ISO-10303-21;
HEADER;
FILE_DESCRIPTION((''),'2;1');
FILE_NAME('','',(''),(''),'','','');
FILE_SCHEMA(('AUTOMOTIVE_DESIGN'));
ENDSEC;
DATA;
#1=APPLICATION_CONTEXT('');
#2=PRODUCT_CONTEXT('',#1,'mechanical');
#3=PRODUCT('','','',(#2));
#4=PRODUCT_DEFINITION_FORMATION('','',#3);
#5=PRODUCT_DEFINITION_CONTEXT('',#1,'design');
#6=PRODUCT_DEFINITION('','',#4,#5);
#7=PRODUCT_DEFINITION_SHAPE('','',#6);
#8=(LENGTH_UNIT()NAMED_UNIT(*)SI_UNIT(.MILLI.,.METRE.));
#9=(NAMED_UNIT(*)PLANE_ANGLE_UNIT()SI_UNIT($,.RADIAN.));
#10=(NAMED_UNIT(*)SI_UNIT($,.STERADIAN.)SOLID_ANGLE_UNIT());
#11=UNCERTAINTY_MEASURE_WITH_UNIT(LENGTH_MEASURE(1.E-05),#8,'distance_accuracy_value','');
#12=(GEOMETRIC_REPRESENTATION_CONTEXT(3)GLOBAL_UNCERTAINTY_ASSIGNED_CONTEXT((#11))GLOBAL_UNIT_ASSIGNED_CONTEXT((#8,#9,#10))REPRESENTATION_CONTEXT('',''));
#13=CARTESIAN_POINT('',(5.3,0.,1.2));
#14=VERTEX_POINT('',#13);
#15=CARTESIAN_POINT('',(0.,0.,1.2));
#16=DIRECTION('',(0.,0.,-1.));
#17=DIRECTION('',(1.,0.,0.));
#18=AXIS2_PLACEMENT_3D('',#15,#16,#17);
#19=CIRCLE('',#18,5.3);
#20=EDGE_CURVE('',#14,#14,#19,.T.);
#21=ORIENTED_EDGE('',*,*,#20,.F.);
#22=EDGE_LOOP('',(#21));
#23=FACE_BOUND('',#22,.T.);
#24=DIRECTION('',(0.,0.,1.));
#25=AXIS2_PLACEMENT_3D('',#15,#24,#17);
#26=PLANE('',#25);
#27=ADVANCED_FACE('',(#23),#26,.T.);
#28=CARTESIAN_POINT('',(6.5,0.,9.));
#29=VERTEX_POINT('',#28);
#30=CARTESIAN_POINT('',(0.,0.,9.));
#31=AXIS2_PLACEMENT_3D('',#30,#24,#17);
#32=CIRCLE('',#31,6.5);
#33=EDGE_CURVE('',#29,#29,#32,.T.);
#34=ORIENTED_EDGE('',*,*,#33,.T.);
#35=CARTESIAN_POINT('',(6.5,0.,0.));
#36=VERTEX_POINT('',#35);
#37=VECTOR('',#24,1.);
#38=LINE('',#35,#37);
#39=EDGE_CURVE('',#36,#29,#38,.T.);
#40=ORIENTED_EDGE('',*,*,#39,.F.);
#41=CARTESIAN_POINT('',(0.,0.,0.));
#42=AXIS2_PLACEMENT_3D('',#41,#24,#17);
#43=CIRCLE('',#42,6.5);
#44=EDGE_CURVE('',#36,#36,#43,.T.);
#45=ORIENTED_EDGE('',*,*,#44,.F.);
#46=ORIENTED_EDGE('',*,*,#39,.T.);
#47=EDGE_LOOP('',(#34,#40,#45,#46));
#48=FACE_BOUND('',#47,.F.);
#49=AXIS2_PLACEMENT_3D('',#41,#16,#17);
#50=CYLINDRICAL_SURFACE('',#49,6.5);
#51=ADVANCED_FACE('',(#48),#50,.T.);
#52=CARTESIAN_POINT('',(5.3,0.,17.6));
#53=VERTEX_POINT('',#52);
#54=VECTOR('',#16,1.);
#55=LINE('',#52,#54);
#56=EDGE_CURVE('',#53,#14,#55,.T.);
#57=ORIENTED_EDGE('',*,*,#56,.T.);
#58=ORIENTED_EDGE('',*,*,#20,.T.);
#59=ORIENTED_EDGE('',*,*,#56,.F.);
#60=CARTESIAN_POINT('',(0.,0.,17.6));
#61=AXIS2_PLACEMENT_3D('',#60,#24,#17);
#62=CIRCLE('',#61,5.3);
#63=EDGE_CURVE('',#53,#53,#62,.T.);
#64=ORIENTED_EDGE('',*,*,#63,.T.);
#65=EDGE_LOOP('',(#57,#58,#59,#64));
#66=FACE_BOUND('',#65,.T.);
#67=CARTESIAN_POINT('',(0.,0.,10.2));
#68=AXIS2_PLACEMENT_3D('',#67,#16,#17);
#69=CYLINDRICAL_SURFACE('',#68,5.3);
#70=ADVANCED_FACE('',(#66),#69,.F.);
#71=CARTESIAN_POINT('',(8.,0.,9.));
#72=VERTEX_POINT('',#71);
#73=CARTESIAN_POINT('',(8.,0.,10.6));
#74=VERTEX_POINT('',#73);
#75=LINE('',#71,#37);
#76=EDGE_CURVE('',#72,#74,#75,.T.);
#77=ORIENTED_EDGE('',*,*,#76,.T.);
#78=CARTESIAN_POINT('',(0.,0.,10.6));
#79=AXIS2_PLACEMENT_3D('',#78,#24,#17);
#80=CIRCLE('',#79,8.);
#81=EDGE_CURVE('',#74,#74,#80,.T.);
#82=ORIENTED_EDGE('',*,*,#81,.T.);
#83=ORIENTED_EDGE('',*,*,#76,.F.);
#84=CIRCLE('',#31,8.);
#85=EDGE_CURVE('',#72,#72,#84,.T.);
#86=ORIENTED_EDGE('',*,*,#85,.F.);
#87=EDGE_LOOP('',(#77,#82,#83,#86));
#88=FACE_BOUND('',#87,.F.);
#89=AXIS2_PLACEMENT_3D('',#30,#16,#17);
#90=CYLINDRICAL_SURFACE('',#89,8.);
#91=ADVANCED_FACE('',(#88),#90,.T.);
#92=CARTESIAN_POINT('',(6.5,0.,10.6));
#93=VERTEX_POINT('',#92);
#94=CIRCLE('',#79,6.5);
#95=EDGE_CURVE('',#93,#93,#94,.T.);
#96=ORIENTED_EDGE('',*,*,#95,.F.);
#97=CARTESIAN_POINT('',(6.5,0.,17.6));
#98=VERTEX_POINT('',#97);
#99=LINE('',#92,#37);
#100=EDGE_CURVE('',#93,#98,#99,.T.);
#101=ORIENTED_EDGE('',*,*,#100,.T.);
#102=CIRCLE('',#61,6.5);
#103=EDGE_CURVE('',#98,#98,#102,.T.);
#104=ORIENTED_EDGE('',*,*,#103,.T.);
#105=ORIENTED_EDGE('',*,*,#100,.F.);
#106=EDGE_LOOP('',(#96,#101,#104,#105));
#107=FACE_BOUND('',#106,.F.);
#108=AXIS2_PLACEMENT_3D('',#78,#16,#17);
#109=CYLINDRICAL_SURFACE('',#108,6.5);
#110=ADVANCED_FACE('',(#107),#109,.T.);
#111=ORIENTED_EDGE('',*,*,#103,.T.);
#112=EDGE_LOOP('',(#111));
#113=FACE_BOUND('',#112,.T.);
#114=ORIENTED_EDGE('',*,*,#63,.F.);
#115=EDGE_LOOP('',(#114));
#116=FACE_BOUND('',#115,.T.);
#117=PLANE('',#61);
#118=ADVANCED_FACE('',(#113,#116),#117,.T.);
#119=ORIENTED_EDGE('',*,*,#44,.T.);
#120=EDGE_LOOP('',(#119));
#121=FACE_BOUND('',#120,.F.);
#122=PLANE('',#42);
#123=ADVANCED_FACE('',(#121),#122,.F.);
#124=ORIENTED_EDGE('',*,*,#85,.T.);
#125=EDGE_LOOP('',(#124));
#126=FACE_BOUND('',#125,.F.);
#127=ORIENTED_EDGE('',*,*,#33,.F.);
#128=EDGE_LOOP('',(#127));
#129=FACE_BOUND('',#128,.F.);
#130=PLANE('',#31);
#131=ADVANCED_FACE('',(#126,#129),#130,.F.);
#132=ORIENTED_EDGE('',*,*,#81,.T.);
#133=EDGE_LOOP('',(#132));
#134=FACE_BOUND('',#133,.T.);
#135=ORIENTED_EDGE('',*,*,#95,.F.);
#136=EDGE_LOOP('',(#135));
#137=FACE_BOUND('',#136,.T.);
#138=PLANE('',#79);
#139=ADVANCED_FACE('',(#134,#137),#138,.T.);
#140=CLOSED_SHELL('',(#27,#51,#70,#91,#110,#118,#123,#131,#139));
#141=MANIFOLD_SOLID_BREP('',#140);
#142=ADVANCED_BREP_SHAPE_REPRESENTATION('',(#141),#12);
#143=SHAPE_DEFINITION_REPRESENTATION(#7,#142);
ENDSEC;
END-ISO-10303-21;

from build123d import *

# Parameters (mm, degrees)
F0_R     = 6.5
F1_DEPTH = 9
F2_R     = 8
F3_DEPTH = 1.6
F4_R     = 6.5
F5_DEPTH = 7
F6_T     = 1.2


# Not quite as in the source:
# - a shell that OpenCascade refuses in one call is made with other operations: the cavity is built on its own and cut out


with BuildPart() as f1:
    # F0 (on Top) → F1 (new body)
    with BuildSketch(Plane.XY):
        Circle(F0_R)
    extrude(amount=F1_DEPTH)

    # F2 (on face) → F3 (join)
    with BuildSketch(Plane.XY.offset(9)):
        Circle(F2_R)
    extrude(amount=F3_DEPTH)

    # F4 (on face) → F5 (join)
    with BuildSketch(Plane.XY.offset(10.6)):
        Circle(F4_R)
    extrude(amount=F5_DEPTH)

    # F6: shell of thickness 1.2, made by hand


with BuildPart() as f6_core1:
    # F6_t2: copy of F1
    add(f1.part)

    # the walls: a layer under each face that stays
    f6_faces = [f6_core1.faces().sort_by_distance(p)[0] for p in [
        (-8, 0, 9.8),
        (-5.3333333333, -5.3333333333, 9),
        (-5.3333333333, -5.3333333333, 10.6),
        (-6.5, 0, 4.5),
        (-6.5, 0, 14.1),
        (0, 0, 0),
    ]]
    thicken(f6_faces, amount=-F6_T, mode=Mode.SUBTRACT)

    # F6_s3 → F6_t4 (revolve, cut)
    with BuildSketch(Plane.XZ):
        Polygon((6.512, 8.988), (6.5, 10.2), (5.3, 10.2), (5.3, 9), align=None)
    revolve(axis=Axis((0, 0, 9), (0, 0, 1)), mode=Mode.SUBTRACT)

    # F6_s5 → F6_t6 (revolve, cut)
    with BuildSketch(Plane.XZ):
        Polygon((6.512, 10.612), (6.5, 9.4), (5.3, 9.4), (5.3, 10.6), align=None)
    revolve(axis=Axis((0, 0, 10.6), (0, 0, 1)), mode=Mode.SUBTRACT)


with BuildPart() as f1_1:
    add(f1.part)

    # what is left inside the walls is the cavity
    f6_cavity = [f6_core1.part.solids().sort_by_distance(p)[0] for p in [
        (-5.288, 0, 12.133333),
    ]]
    add(f6_cavity, mode=Mode.SUBTRACT)


solid = f1_1.part
